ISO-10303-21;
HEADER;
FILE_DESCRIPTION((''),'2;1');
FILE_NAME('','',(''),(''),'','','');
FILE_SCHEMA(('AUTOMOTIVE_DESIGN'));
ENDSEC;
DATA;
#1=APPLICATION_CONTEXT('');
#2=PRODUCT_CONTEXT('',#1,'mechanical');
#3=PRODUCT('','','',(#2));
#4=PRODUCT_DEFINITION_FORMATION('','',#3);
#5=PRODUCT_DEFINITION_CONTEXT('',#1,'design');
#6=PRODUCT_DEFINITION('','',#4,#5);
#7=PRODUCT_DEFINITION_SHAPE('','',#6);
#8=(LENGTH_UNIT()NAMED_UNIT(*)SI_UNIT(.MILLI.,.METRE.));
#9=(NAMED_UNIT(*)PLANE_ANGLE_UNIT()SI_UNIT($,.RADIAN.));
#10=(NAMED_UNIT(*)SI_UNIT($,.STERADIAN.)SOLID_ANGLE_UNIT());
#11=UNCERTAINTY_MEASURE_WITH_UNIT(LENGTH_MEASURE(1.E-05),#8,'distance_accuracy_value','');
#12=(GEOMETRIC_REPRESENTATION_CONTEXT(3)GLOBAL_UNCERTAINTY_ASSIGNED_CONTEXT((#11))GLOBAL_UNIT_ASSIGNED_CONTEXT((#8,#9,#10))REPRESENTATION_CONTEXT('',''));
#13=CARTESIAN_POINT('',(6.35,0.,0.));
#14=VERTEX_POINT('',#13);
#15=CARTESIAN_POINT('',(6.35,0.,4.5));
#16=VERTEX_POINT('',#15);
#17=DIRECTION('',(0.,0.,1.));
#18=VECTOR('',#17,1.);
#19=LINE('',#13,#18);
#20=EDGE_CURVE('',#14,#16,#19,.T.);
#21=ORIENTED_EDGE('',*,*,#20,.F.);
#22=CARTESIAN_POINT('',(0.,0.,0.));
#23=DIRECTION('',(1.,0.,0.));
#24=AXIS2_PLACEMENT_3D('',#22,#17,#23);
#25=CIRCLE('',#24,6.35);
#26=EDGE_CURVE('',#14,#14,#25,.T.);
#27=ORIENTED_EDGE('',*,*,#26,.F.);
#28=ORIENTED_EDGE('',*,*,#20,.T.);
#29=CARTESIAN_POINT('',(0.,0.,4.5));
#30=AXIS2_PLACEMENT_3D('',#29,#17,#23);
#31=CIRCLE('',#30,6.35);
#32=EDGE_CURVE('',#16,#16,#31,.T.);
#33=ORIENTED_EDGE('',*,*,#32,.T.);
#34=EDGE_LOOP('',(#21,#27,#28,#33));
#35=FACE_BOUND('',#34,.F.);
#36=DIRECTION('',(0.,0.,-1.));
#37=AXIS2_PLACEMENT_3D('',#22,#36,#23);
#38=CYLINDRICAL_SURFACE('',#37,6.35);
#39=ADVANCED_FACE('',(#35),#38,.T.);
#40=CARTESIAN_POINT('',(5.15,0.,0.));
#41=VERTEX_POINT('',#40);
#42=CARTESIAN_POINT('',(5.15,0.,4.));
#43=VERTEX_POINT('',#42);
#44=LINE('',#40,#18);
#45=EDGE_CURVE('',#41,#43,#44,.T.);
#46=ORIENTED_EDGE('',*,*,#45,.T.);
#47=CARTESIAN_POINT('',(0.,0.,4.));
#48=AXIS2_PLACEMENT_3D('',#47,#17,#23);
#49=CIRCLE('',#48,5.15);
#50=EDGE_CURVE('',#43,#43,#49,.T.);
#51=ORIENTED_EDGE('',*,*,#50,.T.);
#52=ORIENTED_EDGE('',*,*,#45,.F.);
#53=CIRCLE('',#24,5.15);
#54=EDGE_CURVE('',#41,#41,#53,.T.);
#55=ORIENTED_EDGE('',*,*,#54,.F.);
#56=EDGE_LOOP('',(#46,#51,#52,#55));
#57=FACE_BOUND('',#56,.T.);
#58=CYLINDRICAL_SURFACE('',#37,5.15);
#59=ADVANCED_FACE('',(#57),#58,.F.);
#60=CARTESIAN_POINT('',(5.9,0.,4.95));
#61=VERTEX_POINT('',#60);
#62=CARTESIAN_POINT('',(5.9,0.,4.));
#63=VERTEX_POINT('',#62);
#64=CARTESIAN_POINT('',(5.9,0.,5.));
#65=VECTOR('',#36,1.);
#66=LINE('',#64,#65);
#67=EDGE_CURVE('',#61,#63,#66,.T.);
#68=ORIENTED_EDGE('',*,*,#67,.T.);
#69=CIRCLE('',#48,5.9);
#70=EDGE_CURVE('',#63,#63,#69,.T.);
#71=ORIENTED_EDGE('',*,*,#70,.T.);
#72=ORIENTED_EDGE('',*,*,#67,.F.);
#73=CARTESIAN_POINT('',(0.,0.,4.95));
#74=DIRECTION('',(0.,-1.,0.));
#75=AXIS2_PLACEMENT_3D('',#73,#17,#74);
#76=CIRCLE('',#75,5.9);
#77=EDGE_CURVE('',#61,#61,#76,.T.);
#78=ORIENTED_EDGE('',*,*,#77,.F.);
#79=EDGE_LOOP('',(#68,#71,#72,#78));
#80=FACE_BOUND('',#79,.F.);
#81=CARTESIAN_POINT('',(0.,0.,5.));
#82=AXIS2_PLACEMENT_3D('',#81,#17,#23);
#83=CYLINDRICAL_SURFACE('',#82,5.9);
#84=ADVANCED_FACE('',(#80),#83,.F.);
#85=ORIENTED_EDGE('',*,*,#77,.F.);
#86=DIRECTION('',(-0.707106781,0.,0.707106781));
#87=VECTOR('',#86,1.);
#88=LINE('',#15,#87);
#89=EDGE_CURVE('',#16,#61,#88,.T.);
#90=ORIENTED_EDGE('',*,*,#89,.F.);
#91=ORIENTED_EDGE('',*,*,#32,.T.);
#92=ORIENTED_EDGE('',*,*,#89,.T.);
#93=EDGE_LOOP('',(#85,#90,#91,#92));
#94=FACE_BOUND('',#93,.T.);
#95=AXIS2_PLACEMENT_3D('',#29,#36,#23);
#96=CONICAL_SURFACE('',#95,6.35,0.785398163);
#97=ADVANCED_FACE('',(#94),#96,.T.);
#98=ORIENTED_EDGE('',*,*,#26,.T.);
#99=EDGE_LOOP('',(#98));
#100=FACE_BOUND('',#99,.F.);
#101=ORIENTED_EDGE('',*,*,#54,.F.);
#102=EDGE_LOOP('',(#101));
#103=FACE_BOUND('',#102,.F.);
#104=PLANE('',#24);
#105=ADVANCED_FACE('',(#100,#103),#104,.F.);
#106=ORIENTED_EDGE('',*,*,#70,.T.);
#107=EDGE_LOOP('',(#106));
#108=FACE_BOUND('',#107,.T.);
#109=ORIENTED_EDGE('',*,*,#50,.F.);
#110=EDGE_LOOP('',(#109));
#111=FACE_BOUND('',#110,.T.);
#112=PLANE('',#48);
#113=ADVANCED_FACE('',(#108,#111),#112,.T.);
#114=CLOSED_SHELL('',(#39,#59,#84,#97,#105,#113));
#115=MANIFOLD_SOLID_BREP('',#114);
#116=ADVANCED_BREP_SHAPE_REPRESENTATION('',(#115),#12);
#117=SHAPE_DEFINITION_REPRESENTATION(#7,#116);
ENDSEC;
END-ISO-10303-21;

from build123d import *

# Parameters (mm, degrees)
F0_R     = 6.35
F0_R_2   = 5.15
F1_DEPTH = 5
F2_R     = 5.9
F2_R_2   = 5.15
F3_DEPTH = 1


# Not quite as in the source:
# - a fillet or chamfer that OpenCascade refuses, or shapes differently, is made with other operations: its cross-section is extruded or revolved along the edge and cut away or added


with BuildPart() as f1:
    # F0 (on Top) → F1 (new body)
    with BuildSketch(Plane.XY):
        Circle(F0_R)
        Circle(F0_R_2, mode=Mode.SUBTRACT)
    extrude(amount=F1_DEPTH)

    # F2 (on face) → F3 (cut)
    with BuildSketch(Plane.XY.offset(5)):
        Circle(F2_R)
        Circle(F2_R_2, mode=Mode.SUBTRACT)
    extrude(amount=-F3_DEPTH, mode=Mode.SUBTRACT)

    # F4: chamfer of 0.5 on 1 edges, made by hand

    # F4_s1 → F4_t2 (revolve, cut)
    with BuildSketch(Plane.XZ):
        Polygon((6.35, 4.5), (5.85, 5), (6.35, 5), align=None)
    revolve(axis=Axis((0, 0, 5), (0, 0, 1)), mode=Mode.SUBTRACT)


solid = f1.part
